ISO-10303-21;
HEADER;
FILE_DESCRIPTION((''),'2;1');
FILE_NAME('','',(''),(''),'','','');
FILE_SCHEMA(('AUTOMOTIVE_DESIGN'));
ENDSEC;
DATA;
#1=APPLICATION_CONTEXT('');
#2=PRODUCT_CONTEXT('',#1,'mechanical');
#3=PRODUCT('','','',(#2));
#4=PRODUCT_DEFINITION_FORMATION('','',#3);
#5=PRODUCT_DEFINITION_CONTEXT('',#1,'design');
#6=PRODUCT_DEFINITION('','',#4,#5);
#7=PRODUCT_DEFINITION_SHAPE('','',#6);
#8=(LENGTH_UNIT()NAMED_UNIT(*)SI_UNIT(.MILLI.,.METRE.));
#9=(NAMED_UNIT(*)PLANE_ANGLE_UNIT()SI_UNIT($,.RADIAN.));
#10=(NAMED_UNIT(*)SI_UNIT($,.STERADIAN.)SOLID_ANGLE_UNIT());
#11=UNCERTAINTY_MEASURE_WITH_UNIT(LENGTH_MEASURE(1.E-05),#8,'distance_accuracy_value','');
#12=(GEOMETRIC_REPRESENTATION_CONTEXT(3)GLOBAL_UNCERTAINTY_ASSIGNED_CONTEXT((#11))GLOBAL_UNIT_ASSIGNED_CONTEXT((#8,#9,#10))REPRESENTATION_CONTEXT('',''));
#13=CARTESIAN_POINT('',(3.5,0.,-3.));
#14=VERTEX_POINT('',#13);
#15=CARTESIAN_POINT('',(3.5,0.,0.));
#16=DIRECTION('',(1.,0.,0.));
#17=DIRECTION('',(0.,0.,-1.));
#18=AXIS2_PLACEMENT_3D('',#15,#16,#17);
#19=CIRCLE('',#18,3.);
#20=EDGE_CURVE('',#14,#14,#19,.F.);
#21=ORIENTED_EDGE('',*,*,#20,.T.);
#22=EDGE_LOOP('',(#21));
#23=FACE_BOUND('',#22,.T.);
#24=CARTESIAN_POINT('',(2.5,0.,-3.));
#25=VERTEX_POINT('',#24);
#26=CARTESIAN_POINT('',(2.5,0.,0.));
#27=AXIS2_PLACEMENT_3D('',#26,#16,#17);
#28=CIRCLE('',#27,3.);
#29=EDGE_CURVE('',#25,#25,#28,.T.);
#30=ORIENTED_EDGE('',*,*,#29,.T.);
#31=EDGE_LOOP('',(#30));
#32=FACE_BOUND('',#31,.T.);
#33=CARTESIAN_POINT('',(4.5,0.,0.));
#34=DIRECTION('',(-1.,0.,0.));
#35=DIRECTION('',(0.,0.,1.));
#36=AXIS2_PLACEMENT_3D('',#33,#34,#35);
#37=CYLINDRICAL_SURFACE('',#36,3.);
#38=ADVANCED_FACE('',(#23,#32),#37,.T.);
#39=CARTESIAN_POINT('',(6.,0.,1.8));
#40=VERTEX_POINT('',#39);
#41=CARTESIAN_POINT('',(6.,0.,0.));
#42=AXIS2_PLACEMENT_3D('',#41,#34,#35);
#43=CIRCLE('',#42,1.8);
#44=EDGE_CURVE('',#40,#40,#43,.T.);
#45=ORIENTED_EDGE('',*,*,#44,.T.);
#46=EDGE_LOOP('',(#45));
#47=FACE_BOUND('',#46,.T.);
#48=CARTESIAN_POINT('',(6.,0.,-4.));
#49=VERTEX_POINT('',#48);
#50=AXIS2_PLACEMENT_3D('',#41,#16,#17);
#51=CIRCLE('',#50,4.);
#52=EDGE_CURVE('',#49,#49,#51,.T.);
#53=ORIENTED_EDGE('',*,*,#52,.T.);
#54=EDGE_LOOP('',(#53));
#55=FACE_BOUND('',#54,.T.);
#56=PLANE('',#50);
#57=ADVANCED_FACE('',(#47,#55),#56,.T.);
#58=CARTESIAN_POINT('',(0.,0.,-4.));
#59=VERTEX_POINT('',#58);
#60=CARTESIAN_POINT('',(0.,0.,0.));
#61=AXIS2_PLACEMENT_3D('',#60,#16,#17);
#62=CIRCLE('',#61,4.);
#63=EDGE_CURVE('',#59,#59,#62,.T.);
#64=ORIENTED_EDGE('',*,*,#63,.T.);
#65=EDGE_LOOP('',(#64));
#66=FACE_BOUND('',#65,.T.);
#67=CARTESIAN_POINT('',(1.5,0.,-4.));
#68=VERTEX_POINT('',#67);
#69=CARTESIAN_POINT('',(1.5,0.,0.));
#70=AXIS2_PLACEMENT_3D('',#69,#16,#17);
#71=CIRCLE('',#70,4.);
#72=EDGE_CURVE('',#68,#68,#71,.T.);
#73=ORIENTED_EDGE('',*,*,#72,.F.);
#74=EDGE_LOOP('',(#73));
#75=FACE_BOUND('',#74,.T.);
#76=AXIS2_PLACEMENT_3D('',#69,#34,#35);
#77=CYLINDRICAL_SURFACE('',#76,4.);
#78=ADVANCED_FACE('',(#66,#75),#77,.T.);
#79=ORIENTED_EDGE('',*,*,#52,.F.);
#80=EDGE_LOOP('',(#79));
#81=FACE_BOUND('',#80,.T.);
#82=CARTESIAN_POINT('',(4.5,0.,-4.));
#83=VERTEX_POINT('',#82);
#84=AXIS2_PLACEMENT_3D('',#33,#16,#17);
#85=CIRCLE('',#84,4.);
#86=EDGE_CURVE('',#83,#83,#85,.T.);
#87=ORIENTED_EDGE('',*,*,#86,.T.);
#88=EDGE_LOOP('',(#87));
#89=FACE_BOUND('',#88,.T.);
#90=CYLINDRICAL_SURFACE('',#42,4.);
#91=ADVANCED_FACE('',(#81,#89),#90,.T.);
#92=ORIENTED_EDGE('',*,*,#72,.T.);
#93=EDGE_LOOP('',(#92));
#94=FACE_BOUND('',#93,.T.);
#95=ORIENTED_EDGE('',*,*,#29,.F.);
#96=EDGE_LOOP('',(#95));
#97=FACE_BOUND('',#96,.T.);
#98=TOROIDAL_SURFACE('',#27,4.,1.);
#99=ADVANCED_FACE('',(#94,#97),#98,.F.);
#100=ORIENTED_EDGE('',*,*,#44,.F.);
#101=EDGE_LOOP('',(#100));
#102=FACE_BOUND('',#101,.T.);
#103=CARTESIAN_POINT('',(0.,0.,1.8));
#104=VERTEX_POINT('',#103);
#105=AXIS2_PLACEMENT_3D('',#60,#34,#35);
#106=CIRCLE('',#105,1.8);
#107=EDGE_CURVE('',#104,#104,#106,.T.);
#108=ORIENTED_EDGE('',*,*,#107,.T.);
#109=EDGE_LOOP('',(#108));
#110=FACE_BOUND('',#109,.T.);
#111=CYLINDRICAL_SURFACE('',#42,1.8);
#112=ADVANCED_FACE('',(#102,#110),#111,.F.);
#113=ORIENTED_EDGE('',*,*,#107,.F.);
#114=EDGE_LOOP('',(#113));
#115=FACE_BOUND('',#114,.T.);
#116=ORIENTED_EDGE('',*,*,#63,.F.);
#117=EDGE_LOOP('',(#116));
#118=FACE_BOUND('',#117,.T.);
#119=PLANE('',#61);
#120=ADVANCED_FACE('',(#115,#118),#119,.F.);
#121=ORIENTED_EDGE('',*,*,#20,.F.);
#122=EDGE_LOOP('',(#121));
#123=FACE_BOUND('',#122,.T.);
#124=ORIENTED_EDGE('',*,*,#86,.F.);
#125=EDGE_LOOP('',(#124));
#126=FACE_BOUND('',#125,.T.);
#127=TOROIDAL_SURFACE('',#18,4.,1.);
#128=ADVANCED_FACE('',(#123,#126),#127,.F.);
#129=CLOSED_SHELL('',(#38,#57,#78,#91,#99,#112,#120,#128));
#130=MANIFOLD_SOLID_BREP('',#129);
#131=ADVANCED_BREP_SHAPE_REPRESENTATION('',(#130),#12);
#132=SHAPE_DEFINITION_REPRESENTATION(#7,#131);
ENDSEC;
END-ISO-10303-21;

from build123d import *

# Parameters (mm, degrees)
SKETCH1_R           = 4
BOSS_EXTRUDE1_DEPTH = 1.5
SKETCH2_R           = 3
BOSS_EXTRUDE2_DEPTH = 3
SKETCH3_R           = 4
BOSS_EXTRUDE3_DEPTH = 1.5
FILLET1_R           = 1
SKETCH4_R           = 1.8
CUT_EXTRUDE1_DEPTH  = 9.246211251


with BuildPart() as part:
    # Sketch1 → Boss-Extrude1 (new body)
    with BuildSketch(Plane(origin=(0, 0, 0), x_dir=(0, 0, -1), z_dir=(1, 0, 0))):
        Circle(SKETCH1_R)
    extrude(amount=BOSS_EXTRUDE1_DEPTH)

    # Sketch2 → Boss-Extrude2 (add)
    with BuildSketch(Plane(origin=(1.5, 0, 0), x_dir=(0, 0, -1), z_dir=(1, 0, 0))):
        Circle(SKETCH2_R)
    extrude(amount=BOSS_EXTRUDE2_DEPTH)

    # Sketch3 → Boss-Extrude3 (add)
    with BuildSketch(Plane(origin=(4.5, 0, 0), x_dir=(0, 0, -1), z_dir=(1, 0, 0))):
        Circle(SKETCH3_R)
    extrude(amount=BOSS_EXTRUDE3_DEPTH)

    # Fillet1
    fillet1_edges = [part.edges().sort_by_distance(p)[0] for p in [
        (1.5, 0, 3),
        (4.5, 0, 3),
    ]]
    fillet(fillet1_edges, radius=FILLET1_R - 0.0001)  # a hair under: the kernel refuses the full size

    # Sketch4 → Cut-Extrude1 (cut, through all)
    with BuildSketch(Plane.ZY):
        Circle(SKETCH4_R)
    extrude(amount=-CUT_EXTRUDE1_DEPTH, mode=Mode.SUBTRACT)


solid = part.part
